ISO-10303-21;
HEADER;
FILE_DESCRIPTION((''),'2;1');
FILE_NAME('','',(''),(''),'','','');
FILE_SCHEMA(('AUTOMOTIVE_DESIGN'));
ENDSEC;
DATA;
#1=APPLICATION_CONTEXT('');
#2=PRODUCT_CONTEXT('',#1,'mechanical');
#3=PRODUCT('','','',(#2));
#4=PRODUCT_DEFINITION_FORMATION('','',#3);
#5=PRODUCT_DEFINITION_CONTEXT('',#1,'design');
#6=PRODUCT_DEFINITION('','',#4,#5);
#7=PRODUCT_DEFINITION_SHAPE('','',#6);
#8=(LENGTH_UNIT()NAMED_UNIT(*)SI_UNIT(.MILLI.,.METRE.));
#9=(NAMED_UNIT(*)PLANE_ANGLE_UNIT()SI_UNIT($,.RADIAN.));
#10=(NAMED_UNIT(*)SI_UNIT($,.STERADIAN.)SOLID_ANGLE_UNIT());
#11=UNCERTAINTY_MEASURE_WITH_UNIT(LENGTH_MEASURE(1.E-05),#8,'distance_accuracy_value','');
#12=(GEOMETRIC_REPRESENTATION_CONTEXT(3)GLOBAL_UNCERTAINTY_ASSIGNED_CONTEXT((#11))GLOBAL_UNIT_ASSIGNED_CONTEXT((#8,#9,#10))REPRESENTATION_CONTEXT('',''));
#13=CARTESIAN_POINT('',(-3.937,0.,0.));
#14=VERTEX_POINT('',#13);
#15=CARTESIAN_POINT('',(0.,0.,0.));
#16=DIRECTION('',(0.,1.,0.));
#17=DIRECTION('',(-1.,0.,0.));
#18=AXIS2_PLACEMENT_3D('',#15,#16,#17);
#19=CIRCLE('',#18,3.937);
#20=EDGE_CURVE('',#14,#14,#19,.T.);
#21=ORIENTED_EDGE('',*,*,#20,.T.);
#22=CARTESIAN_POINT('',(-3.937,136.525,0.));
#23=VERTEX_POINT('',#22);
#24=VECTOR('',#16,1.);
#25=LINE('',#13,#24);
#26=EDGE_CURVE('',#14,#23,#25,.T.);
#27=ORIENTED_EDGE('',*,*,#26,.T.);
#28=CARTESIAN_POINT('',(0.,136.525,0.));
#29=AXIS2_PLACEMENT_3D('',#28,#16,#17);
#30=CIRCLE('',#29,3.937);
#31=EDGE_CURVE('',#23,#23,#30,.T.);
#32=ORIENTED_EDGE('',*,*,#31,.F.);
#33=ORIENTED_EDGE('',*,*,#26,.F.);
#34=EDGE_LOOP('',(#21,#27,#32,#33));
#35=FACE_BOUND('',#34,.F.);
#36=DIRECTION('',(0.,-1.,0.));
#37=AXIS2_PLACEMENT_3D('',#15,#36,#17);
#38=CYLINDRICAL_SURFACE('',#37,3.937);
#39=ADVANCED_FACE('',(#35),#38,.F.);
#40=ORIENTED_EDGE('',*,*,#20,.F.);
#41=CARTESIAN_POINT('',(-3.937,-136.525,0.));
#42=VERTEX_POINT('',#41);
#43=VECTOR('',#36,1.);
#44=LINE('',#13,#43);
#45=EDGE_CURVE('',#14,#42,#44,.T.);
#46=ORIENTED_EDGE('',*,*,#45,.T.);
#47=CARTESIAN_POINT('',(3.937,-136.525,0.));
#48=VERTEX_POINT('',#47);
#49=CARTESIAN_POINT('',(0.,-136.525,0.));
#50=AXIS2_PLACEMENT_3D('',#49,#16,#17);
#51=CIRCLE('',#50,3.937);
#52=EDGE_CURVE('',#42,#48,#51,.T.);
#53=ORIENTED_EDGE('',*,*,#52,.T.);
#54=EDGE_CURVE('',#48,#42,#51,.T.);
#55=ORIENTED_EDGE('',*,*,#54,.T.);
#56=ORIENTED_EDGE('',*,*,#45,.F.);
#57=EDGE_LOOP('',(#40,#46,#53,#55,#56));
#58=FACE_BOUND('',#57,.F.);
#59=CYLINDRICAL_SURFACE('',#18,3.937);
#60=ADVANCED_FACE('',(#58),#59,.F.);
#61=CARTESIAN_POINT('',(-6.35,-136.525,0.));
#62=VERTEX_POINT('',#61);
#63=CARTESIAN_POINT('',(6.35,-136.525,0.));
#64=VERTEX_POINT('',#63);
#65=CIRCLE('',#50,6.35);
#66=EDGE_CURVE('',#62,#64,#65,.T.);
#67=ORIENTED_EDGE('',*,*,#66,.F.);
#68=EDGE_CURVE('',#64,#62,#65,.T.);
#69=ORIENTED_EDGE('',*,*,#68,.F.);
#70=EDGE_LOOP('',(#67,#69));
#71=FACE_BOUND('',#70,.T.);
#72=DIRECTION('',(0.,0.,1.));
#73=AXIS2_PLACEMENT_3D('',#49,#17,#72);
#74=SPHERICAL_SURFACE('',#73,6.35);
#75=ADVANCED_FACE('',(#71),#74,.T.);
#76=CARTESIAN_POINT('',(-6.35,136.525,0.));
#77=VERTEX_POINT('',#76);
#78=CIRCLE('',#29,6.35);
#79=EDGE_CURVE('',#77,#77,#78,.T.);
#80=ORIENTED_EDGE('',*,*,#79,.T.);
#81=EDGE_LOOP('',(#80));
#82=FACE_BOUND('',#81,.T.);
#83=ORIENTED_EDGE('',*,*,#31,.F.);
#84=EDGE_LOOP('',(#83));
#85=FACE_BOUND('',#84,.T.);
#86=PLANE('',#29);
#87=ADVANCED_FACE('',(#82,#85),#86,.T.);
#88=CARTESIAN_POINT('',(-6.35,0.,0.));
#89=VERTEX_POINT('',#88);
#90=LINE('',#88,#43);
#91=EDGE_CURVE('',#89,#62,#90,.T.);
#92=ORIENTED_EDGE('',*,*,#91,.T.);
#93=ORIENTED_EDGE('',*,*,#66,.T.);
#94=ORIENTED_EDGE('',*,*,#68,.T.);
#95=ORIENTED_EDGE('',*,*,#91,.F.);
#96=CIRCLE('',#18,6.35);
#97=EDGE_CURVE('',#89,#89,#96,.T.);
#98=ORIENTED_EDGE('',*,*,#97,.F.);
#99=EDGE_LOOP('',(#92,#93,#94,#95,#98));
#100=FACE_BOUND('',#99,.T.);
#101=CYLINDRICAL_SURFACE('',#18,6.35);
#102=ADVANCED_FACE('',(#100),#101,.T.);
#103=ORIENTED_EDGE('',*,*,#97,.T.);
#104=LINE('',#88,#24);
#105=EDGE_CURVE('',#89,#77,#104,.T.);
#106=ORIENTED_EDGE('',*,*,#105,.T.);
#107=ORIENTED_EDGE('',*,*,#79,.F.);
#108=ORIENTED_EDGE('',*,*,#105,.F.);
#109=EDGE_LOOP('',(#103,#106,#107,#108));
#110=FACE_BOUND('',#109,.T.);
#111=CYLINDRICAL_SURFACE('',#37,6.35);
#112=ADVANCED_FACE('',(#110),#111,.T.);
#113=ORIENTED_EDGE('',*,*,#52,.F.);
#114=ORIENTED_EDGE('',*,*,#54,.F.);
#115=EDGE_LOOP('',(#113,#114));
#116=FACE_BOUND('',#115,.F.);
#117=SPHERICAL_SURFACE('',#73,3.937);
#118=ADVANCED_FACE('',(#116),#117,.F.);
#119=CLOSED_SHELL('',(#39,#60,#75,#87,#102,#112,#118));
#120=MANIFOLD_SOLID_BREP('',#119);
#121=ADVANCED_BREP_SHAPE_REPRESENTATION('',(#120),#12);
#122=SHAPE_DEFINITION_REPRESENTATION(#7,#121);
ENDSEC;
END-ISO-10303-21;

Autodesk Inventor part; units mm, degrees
ref_plane "YZ Plane" through (0, 0, 0) normal (1, 0, 0) x (0, 1, 0)
ref_plane "XZ Plane" through (0, 0, 0) normal (0, 1, 0) x (-1, 0, 0)
ref_plane "XY Plane" through (0, 0, 0) normal (0, 0, 1) x (1, 0, 0)
sketch "Sketch1" plane through (0, 0, 0) normal (0, 1, 0) x (-1, 0, 0)
  circle A0 centre (0, 0) radius 6.35
  circle A1 centre (0, 0) radius 3.937
  dimension "d0" = 12.7
  dimension "d1" = 7.874
extrude "Extrusion1" add sketch "Sketch1" along normal mid plane 273.05
sketch "Sketch2" plane through (0, -136.525, 0) normal (0, -1, 0) x (1, 0, 0)
  circle A0 centre (0, 0) radius 3.937 projected
  circle A1 centre (0, 0) radius 6.35 projected
  circle A2 centre (0, 0) radius 6.35 projected
  line L0 (-6.35, 0) -> (0, 0)
  line L1 (6.35, 0) -> (0, 0)
  circle A3 centre (0, 0) radius 3.937 projected
  arc A4 (3.937, 0) -> (-3.937, 0) centre (0, 0) ccw
  arc A5 (6.35, 0) -> (-6.35, 0) centre (0, 0) ccw
revolve "Revolution1" add sketch "Sketch2" angle 180 about axis through (6.35, -136.525, 0) along (1, 0, 0) picked at (-5.446, 0.8206) contours A0 L0 A1 L1
equation "\"d0\" = glassTubeDiameter"
equation "\"d1\" = glassTubeID"
equation "\"d2\" = glassTubeLength - 0.5 * glassTubeDiameter"
equation "\"tubeHeight\" = 50.8"
equation "\"tubeWidth\" = 101.6"
equation "\"tubeLength\" = 304.8"
equation "\"tubeWallThickness\" = 3.175"
equation "\"plateOverhang\" = 6.35"
equation "\"moatWidth\" = 3.175"
equation "\"moatDepth\" = 3.175"
equation "\"tubePlateClearance\" = 0.127"
equation "\"blankCapThickness\" = 9.525"
equation "\"sensorCapThickness\" = 12.7"
equation "\"glassTubeDiameter\" = 12.7"
equation "\"glassTubeClearance\" = 0.19844"
equation "\"glassTubeID\" = 7.874"
equation "\"glassTubeLength\" = 279.4"
equation "\"longHoleSpacing\" = 30.48"
equation "\"shortHoleSpacing\" = 21.59"
equation "\"sensorHolderDiameter\" = 50.8"
equation "\"sensorHolderThickness\" = 12.7"
equation "\"fiberDiameter\" = 1"
equation "\"fiberClearance\" = 0"
equation "\"oRingID\" = 22.2504"
equation "\"oRingGrooveWidth\" = 2.54"
equation "\"oRingGrooveDepth\" = 1.2446"
properties part number "glassTube" material "Glass"
